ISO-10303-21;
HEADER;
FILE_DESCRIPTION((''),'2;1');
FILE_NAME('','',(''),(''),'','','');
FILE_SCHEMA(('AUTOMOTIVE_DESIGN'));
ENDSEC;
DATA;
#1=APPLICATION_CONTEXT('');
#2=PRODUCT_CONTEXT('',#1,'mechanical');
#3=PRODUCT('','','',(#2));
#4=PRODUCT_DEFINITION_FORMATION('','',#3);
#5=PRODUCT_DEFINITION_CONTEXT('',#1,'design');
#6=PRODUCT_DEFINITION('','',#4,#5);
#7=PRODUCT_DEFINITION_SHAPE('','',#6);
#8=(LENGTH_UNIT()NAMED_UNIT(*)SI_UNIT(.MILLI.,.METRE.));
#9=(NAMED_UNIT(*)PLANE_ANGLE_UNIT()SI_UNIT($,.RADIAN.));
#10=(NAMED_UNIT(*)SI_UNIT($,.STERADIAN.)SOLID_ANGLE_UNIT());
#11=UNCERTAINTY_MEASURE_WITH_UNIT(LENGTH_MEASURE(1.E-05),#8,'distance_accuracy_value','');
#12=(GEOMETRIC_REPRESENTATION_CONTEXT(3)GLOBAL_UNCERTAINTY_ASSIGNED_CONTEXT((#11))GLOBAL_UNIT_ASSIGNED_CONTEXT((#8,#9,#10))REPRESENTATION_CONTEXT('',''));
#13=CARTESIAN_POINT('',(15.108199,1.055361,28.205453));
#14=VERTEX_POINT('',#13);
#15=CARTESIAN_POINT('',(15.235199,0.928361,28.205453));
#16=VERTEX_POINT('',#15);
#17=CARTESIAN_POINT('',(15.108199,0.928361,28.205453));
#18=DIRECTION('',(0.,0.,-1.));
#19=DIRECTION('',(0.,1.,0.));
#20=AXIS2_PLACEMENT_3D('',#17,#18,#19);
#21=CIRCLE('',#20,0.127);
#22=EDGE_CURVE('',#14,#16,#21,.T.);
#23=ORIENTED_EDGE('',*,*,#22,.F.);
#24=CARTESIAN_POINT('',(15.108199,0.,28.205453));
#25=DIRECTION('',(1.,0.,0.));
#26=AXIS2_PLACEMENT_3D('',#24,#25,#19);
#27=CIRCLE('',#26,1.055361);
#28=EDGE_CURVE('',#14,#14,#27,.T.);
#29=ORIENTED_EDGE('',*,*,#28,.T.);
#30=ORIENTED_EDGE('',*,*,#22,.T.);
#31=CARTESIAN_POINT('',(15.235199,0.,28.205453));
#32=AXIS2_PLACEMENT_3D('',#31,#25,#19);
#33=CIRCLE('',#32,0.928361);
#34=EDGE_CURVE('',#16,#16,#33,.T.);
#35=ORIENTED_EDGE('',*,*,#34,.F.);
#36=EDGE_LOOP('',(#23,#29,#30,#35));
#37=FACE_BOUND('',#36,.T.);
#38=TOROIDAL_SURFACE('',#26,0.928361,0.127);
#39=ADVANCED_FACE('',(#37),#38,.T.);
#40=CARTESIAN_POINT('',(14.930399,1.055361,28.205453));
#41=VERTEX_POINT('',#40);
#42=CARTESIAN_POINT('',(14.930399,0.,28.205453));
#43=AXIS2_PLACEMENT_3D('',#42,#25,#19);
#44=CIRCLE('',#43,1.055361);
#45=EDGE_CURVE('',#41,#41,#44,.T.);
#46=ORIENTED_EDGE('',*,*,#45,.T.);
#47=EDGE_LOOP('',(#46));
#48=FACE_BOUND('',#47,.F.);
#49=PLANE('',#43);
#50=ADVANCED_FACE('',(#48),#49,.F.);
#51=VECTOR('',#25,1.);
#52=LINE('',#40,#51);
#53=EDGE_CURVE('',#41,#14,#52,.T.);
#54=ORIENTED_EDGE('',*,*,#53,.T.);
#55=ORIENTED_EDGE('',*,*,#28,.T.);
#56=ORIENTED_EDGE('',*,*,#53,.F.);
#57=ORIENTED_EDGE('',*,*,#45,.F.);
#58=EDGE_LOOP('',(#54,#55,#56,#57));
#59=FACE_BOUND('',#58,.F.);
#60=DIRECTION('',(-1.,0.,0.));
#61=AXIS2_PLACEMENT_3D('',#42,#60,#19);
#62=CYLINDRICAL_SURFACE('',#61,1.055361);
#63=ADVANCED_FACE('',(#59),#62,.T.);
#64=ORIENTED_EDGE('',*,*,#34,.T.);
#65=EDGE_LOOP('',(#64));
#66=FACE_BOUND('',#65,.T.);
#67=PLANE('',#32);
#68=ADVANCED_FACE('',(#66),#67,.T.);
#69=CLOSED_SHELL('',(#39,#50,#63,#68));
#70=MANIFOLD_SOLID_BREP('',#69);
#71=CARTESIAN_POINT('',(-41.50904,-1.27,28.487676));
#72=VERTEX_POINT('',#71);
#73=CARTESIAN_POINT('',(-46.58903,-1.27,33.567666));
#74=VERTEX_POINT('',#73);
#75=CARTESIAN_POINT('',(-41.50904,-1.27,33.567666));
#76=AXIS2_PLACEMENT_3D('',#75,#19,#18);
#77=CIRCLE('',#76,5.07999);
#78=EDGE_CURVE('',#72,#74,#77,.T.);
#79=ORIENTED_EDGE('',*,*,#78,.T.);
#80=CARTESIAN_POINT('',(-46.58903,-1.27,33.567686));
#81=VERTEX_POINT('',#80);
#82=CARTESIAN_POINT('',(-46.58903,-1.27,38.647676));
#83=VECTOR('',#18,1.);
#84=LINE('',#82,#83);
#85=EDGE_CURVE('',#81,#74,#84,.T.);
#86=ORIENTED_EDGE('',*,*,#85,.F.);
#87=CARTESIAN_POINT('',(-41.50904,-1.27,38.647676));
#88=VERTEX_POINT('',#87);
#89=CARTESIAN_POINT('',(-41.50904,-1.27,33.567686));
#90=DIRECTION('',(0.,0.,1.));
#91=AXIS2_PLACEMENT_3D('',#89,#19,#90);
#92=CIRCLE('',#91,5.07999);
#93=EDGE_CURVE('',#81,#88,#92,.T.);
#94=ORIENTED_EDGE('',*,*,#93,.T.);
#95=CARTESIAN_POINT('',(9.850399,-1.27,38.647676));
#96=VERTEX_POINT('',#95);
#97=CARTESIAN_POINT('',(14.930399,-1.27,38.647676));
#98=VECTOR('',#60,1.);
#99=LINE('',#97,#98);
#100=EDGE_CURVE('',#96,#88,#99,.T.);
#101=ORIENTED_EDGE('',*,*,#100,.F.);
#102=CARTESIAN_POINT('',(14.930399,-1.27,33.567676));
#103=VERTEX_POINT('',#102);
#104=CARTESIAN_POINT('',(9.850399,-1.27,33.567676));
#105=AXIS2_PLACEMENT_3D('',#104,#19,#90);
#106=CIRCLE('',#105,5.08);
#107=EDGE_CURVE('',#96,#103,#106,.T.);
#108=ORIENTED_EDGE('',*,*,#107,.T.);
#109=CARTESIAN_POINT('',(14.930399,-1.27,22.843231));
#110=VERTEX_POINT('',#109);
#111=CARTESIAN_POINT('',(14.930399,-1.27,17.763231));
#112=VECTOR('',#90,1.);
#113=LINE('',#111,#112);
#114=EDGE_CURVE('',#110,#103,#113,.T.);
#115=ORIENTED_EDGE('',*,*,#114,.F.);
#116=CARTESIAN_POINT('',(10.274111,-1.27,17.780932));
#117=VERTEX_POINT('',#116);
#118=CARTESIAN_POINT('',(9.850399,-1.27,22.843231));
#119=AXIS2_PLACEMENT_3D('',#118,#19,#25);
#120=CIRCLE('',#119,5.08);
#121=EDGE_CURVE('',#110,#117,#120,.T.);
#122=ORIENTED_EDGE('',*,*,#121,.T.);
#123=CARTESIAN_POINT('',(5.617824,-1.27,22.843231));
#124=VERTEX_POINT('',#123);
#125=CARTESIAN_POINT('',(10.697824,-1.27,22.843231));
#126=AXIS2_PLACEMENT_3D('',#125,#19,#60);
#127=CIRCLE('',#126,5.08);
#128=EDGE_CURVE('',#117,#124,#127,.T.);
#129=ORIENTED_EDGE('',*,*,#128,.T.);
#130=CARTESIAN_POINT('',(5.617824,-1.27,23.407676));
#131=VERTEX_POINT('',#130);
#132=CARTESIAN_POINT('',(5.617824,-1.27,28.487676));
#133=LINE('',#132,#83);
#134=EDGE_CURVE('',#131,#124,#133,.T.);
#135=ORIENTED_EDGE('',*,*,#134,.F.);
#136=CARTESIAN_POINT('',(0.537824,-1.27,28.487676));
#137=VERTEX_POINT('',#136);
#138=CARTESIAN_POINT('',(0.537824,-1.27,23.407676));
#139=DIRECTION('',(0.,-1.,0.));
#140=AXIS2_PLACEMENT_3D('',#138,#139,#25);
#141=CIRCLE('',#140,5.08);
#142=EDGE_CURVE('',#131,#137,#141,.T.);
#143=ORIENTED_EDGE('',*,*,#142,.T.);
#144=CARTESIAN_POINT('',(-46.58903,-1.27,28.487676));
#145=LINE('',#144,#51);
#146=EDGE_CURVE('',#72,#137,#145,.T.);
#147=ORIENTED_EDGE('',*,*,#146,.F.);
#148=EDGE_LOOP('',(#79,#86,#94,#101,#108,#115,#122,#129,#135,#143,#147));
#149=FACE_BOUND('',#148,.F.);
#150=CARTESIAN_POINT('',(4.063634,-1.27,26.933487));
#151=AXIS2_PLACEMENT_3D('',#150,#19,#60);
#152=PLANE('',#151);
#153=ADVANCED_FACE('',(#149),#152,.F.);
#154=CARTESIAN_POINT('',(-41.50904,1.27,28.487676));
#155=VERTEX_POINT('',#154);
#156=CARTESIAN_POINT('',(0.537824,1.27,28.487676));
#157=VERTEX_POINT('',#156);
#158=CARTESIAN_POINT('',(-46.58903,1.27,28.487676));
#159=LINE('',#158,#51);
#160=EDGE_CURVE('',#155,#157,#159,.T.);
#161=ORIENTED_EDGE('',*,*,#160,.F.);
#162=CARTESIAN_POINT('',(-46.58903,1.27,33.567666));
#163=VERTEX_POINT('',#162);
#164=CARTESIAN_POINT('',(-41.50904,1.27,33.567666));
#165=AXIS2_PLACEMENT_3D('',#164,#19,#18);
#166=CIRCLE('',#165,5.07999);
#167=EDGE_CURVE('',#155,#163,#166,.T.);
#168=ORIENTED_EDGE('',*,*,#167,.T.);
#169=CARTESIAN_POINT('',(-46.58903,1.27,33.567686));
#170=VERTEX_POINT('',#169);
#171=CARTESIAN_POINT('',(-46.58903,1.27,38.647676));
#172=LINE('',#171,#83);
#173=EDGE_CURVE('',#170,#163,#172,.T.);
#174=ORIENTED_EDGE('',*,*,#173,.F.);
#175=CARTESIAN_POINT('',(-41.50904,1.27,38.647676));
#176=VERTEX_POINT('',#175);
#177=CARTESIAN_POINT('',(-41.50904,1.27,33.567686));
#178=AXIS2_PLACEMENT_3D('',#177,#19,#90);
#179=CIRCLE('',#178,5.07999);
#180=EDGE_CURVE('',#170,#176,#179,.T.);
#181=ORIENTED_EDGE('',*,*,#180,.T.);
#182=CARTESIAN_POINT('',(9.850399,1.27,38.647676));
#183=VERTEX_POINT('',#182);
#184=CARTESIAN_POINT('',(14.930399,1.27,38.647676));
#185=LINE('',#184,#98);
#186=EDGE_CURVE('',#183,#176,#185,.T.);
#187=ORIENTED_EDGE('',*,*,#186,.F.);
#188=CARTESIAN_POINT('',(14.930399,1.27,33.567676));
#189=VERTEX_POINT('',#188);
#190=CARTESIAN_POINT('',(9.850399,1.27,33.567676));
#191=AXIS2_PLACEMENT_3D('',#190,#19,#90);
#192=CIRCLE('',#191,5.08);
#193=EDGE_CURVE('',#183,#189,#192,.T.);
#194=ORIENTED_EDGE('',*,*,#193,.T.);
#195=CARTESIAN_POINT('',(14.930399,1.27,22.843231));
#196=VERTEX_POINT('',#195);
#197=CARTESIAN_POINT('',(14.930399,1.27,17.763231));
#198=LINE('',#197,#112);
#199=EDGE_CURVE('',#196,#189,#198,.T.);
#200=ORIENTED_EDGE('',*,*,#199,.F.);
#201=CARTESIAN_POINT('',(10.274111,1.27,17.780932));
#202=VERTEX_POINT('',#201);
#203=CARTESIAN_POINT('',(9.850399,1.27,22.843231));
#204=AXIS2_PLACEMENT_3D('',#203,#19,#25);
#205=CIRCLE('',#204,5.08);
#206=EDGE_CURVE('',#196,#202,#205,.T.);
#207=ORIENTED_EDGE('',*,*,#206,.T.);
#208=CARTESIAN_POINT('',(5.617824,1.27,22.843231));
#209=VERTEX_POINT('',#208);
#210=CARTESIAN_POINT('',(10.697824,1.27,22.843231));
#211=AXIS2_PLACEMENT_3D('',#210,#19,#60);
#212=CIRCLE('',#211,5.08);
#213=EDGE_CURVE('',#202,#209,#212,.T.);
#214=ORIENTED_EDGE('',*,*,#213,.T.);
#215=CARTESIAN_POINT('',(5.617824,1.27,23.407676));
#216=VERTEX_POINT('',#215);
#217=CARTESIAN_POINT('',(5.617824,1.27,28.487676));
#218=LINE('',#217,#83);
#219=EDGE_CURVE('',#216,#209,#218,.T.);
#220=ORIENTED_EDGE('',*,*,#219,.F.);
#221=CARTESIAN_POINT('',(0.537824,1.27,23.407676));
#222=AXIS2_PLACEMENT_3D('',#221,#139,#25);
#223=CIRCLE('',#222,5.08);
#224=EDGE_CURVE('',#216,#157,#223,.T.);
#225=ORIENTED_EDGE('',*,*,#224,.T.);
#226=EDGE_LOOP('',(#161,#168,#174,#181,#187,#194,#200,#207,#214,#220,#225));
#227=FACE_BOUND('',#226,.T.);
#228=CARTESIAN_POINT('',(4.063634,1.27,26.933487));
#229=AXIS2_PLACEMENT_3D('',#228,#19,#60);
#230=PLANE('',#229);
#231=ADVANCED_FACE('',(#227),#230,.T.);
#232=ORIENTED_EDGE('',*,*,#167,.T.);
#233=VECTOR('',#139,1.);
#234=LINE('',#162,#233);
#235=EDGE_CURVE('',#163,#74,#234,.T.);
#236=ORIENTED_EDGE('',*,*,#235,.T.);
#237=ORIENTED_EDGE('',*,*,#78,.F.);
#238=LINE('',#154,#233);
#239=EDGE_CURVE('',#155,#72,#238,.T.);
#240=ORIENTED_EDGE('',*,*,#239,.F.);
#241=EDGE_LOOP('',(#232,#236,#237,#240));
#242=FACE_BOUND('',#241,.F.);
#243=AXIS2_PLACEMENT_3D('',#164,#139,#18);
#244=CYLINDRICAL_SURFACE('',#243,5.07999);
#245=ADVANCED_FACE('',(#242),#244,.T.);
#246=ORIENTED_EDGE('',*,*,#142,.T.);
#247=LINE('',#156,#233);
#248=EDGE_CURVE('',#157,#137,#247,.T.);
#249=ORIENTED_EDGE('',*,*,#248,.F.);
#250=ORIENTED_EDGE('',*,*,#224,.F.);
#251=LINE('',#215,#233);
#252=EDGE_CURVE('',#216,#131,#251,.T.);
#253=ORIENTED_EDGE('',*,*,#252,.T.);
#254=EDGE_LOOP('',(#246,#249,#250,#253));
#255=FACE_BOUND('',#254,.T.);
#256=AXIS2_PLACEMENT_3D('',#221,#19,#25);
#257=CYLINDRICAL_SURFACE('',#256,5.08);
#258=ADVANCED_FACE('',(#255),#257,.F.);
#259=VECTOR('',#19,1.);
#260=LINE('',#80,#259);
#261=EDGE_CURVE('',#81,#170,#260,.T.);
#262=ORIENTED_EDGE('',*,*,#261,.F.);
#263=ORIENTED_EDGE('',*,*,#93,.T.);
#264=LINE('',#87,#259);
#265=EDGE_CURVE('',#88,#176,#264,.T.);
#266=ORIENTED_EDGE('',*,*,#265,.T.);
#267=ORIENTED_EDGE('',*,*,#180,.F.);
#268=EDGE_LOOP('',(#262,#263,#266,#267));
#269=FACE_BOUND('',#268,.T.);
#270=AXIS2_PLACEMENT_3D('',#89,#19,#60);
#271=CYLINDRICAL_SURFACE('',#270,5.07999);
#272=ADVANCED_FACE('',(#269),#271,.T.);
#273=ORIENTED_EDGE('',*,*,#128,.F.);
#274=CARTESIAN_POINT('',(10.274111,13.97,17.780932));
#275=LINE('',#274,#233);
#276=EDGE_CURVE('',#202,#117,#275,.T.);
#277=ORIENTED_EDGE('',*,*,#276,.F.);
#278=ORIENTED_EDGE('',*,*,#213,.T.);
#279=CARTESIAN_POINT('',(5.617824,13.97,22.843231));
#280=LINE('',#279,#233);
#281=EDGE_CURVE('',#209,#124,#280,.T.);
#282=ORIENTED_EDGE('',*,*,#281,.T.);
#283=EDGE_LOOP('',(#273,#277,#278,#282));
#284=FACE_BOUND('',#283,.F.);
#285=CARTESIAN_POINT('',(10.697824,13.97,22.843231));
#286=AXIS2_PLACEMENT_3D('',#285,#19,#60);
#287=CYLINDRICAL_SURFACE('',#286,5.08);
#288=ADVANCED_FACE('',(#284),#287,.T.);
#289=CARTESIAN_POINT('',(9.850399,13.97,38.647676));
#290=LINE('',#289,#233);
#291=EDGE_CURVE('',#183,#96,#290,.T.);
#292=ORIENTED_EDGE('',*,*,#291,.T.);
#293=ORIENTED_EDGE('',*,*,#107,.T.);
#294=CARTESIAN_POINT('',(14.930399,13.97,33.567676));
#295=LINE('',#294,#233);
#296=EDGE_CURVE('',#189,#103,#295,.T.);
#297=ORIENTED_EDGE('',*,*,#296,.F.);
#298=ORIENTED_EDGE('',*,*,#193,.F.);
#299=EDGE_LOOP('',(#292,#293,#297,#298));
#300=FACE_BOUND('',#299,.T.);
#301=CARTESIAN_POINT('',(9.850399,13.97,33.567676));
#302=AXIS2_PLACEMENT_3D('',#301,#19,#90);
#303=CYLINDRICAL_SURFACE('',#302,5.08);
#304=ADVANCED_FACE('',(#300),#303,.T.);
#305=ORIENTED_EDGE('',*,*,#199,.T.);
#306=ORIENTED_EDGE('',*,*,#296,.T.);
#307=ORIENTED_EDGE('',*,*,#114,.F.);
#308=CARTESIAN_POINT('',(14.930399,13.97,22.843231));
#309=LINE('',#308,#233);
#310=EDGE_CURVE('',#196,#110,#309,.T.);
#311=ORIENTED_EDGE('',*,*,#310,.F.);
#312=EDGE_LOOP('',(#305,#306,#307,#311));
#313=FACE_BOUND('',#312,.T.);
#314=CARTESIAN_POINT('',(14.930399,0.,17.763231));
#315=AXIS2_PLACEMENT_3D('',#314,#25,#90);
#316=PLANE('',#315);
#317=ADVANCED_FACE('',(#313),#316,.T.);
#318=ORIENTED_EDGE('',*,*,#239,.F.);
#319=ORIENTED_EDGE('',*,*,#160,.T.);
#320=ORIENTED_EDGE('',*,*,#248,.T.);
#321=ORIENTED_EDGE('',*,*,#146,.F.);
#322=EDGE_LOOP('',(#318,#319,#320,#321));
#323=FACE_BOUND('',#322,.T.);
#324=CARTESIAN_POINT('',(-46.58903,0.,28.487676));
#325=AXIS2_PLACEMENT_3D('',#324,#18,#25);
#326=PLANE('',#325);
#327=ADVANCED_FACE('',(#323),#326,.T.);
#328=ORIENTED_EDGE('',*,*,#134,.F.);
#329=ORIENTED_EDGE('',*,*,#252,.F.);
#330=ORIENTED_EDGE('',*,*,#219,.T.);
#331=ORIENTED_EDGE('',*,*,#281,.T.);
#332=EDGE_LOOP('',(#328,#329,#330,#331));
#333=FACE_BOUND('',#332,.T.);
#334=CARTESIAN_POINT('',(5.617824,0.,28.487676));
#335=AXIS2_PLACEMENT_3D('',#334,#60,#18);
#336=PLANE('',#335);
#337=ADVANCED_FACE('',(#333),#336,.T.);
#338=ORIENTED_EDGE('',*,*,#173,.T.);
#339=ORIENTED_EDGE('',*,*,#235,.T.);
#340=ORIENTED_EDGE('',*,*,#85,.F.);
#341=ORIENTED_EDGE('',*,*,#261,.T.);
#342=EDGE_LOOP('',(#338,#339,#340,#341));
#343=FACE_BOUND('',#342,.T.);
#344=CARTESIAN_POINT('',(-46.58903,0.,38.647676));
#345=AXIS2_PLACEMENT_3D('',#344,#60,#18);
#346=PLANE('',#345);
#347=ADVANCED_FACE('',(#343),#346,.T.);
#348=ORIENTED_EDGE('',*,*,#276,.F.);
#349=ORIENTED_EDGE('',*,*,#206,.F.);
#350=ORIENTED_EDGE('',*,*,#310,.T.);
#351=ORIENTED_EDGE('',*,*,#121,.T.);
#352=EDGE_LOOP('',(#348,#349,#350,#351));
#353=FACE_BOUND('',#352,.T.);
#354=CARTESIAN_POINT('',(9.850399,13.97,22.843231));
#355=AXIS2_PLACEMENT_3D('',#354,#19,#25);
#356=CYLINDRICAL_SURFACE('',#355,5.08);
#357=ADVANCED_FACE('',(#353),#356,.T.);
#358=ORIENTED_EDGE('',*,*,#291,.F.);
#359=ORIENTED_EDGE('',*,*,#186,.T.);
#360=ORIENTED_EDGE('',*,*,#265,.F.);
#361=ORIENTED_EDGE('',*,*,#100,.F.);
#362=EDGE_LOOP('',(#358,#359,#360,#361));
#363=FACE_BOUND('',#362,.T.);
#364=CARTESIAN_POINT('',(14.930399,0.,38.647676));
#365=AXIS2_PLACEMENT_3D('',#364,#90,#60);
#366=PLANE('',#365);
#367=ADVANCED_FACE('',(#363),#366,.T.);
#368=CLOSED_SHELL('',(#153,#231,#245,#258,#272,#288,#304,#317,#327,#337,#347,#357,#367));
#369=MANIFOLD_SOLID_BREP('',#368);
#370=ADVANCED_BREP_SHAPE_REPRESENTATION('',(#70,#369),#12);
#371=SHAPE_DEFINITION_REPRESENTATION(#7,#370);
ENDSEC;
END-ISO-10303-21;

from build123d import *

# Parameters (mm, degrees)
F1_DEPTH    = 1.27
F2_T1_DEPTH = 2.54
F2_T3_DEPTH = 27.94
F3_R        = 5.07999
F4_R        = 1.0553612336
F5_DEPTH    = 0.3048
F6_R        = 0.127


# Not quite as in the source:
# - a fillet or chamfer that OpenCascade refuses, or shapes differently, is made with other operations: its cross-section is extruded or revolved along the edge and cut away or added
# - a fillet or chamfer is up to 0.001 mm smaller than in the source, because OpenCascade refuses the exact size


with BuildPart() as f1:
    # F0 (on Front) → F1 (new body, symmetric)
    with BuildSketch(Plane.XZ):
        Polygon((-46.589029785, 38.6476762999), (-46.589029785, 28.4876762999), (5.6178237253, 28.4876762999), (5.6178237253, 17.7632305365), (14.9303989669, 17.7632305365), (14.9303989669, 38.6476762999), align=None)
    extrude(amount=F1_DEPTH, both=True)

    # F2: fillet of radius 5.08 on 4 edges, made by hand

    # F2_s2 → F2_t1 (join)
    with BuildSketch(Plane.XZ.offset(-1.27)):
        with BuildLine():
            ThreePointArc((5.6178237253, 23.4076762999), (4.1299261737, 26.9997787484), (0.5378237253, 28.4876762999))
            Line((0.5378237253, 28.4876762999), (5.6178237253, 28.4876762999))
            Line((5.6178237253, 28.4876762999), (5.6178237253, 23.4076762999))
        make_face()
    extrude(amount=F2_T1_DEPTH)

    # F2_s4 → F2_t3 (cut)
    with BuildSketch(Plane.XZ.offset(-13.97)):
        with BuildLine():
            ThreePointArc((9.8503989669, 38.6476762999), (13.4425014153, 37.1597787484), (14.9303989669, 33.5676762999))
            Line((14.9303989669, 33.5676762999), (14.9303989669, 38.6476762999))
            Line((14.9303989669, 38.6476762999), (9.8503989669, 38.6476762999))
        make_face()
        with BuildLine():
            ThreePointArc((14.9303989669, 22.8432305365), (13.4425014153, 19.251128088), (9.8503989669, 17.7632305365))
            Line((9.8503989669, 17.7632305365), (14.9303989669, 17.7632305365))
            Line((14.9303989669, 17.7632305365), (14.9303989669, 22.8432305365))
        make_face()
        with BuildLine():
            ThreePointArc((5.6178237253, 22.8432305365), (7.1057212768, 19.251128088), (10.6978237253, 17.7632305365))
            Line((10.6978237253, 17.7632305365), (5.6178237253, 17.7632305365))
            Line((5.6178237253, 17.7632305365), (5.6178237253, 22.8432305365))
        make_face()
    extrude(amount=F2_T3_DEPTH, mode=Mode.SUBTRACT)

    # F3 (radius 5.08 in the source; OpenCascade refuses exactly that, so slightly less here)
    f3_edges = [f1.edges().sort_by_distance(p)[0] for p in [
        (-46.58903, 0, 38.647676),
        (-46.58903, 0, 28.487676),
    ]]
    fillet(f3_edges, radius=F3_R)


with BuildPart() as f5:
    # F4 (on face) → F5 (new body)
    with BuildSketch(Plane.YZ.offset(14.9303989669)):
        with Locations((0, 28.2054534182)):
            Circle(F4_R)
    extrude(amount=F5_DEPTH)

    # F6
    f6_edges = [f5.edges().sort_by_distance(p)[0] for p in [
        (15.235199, -1.055361, 28.205453),
    ]]
    fillet(f6_edges, radius=F6_R)


solid = Compound([f1.part, f5.part])
